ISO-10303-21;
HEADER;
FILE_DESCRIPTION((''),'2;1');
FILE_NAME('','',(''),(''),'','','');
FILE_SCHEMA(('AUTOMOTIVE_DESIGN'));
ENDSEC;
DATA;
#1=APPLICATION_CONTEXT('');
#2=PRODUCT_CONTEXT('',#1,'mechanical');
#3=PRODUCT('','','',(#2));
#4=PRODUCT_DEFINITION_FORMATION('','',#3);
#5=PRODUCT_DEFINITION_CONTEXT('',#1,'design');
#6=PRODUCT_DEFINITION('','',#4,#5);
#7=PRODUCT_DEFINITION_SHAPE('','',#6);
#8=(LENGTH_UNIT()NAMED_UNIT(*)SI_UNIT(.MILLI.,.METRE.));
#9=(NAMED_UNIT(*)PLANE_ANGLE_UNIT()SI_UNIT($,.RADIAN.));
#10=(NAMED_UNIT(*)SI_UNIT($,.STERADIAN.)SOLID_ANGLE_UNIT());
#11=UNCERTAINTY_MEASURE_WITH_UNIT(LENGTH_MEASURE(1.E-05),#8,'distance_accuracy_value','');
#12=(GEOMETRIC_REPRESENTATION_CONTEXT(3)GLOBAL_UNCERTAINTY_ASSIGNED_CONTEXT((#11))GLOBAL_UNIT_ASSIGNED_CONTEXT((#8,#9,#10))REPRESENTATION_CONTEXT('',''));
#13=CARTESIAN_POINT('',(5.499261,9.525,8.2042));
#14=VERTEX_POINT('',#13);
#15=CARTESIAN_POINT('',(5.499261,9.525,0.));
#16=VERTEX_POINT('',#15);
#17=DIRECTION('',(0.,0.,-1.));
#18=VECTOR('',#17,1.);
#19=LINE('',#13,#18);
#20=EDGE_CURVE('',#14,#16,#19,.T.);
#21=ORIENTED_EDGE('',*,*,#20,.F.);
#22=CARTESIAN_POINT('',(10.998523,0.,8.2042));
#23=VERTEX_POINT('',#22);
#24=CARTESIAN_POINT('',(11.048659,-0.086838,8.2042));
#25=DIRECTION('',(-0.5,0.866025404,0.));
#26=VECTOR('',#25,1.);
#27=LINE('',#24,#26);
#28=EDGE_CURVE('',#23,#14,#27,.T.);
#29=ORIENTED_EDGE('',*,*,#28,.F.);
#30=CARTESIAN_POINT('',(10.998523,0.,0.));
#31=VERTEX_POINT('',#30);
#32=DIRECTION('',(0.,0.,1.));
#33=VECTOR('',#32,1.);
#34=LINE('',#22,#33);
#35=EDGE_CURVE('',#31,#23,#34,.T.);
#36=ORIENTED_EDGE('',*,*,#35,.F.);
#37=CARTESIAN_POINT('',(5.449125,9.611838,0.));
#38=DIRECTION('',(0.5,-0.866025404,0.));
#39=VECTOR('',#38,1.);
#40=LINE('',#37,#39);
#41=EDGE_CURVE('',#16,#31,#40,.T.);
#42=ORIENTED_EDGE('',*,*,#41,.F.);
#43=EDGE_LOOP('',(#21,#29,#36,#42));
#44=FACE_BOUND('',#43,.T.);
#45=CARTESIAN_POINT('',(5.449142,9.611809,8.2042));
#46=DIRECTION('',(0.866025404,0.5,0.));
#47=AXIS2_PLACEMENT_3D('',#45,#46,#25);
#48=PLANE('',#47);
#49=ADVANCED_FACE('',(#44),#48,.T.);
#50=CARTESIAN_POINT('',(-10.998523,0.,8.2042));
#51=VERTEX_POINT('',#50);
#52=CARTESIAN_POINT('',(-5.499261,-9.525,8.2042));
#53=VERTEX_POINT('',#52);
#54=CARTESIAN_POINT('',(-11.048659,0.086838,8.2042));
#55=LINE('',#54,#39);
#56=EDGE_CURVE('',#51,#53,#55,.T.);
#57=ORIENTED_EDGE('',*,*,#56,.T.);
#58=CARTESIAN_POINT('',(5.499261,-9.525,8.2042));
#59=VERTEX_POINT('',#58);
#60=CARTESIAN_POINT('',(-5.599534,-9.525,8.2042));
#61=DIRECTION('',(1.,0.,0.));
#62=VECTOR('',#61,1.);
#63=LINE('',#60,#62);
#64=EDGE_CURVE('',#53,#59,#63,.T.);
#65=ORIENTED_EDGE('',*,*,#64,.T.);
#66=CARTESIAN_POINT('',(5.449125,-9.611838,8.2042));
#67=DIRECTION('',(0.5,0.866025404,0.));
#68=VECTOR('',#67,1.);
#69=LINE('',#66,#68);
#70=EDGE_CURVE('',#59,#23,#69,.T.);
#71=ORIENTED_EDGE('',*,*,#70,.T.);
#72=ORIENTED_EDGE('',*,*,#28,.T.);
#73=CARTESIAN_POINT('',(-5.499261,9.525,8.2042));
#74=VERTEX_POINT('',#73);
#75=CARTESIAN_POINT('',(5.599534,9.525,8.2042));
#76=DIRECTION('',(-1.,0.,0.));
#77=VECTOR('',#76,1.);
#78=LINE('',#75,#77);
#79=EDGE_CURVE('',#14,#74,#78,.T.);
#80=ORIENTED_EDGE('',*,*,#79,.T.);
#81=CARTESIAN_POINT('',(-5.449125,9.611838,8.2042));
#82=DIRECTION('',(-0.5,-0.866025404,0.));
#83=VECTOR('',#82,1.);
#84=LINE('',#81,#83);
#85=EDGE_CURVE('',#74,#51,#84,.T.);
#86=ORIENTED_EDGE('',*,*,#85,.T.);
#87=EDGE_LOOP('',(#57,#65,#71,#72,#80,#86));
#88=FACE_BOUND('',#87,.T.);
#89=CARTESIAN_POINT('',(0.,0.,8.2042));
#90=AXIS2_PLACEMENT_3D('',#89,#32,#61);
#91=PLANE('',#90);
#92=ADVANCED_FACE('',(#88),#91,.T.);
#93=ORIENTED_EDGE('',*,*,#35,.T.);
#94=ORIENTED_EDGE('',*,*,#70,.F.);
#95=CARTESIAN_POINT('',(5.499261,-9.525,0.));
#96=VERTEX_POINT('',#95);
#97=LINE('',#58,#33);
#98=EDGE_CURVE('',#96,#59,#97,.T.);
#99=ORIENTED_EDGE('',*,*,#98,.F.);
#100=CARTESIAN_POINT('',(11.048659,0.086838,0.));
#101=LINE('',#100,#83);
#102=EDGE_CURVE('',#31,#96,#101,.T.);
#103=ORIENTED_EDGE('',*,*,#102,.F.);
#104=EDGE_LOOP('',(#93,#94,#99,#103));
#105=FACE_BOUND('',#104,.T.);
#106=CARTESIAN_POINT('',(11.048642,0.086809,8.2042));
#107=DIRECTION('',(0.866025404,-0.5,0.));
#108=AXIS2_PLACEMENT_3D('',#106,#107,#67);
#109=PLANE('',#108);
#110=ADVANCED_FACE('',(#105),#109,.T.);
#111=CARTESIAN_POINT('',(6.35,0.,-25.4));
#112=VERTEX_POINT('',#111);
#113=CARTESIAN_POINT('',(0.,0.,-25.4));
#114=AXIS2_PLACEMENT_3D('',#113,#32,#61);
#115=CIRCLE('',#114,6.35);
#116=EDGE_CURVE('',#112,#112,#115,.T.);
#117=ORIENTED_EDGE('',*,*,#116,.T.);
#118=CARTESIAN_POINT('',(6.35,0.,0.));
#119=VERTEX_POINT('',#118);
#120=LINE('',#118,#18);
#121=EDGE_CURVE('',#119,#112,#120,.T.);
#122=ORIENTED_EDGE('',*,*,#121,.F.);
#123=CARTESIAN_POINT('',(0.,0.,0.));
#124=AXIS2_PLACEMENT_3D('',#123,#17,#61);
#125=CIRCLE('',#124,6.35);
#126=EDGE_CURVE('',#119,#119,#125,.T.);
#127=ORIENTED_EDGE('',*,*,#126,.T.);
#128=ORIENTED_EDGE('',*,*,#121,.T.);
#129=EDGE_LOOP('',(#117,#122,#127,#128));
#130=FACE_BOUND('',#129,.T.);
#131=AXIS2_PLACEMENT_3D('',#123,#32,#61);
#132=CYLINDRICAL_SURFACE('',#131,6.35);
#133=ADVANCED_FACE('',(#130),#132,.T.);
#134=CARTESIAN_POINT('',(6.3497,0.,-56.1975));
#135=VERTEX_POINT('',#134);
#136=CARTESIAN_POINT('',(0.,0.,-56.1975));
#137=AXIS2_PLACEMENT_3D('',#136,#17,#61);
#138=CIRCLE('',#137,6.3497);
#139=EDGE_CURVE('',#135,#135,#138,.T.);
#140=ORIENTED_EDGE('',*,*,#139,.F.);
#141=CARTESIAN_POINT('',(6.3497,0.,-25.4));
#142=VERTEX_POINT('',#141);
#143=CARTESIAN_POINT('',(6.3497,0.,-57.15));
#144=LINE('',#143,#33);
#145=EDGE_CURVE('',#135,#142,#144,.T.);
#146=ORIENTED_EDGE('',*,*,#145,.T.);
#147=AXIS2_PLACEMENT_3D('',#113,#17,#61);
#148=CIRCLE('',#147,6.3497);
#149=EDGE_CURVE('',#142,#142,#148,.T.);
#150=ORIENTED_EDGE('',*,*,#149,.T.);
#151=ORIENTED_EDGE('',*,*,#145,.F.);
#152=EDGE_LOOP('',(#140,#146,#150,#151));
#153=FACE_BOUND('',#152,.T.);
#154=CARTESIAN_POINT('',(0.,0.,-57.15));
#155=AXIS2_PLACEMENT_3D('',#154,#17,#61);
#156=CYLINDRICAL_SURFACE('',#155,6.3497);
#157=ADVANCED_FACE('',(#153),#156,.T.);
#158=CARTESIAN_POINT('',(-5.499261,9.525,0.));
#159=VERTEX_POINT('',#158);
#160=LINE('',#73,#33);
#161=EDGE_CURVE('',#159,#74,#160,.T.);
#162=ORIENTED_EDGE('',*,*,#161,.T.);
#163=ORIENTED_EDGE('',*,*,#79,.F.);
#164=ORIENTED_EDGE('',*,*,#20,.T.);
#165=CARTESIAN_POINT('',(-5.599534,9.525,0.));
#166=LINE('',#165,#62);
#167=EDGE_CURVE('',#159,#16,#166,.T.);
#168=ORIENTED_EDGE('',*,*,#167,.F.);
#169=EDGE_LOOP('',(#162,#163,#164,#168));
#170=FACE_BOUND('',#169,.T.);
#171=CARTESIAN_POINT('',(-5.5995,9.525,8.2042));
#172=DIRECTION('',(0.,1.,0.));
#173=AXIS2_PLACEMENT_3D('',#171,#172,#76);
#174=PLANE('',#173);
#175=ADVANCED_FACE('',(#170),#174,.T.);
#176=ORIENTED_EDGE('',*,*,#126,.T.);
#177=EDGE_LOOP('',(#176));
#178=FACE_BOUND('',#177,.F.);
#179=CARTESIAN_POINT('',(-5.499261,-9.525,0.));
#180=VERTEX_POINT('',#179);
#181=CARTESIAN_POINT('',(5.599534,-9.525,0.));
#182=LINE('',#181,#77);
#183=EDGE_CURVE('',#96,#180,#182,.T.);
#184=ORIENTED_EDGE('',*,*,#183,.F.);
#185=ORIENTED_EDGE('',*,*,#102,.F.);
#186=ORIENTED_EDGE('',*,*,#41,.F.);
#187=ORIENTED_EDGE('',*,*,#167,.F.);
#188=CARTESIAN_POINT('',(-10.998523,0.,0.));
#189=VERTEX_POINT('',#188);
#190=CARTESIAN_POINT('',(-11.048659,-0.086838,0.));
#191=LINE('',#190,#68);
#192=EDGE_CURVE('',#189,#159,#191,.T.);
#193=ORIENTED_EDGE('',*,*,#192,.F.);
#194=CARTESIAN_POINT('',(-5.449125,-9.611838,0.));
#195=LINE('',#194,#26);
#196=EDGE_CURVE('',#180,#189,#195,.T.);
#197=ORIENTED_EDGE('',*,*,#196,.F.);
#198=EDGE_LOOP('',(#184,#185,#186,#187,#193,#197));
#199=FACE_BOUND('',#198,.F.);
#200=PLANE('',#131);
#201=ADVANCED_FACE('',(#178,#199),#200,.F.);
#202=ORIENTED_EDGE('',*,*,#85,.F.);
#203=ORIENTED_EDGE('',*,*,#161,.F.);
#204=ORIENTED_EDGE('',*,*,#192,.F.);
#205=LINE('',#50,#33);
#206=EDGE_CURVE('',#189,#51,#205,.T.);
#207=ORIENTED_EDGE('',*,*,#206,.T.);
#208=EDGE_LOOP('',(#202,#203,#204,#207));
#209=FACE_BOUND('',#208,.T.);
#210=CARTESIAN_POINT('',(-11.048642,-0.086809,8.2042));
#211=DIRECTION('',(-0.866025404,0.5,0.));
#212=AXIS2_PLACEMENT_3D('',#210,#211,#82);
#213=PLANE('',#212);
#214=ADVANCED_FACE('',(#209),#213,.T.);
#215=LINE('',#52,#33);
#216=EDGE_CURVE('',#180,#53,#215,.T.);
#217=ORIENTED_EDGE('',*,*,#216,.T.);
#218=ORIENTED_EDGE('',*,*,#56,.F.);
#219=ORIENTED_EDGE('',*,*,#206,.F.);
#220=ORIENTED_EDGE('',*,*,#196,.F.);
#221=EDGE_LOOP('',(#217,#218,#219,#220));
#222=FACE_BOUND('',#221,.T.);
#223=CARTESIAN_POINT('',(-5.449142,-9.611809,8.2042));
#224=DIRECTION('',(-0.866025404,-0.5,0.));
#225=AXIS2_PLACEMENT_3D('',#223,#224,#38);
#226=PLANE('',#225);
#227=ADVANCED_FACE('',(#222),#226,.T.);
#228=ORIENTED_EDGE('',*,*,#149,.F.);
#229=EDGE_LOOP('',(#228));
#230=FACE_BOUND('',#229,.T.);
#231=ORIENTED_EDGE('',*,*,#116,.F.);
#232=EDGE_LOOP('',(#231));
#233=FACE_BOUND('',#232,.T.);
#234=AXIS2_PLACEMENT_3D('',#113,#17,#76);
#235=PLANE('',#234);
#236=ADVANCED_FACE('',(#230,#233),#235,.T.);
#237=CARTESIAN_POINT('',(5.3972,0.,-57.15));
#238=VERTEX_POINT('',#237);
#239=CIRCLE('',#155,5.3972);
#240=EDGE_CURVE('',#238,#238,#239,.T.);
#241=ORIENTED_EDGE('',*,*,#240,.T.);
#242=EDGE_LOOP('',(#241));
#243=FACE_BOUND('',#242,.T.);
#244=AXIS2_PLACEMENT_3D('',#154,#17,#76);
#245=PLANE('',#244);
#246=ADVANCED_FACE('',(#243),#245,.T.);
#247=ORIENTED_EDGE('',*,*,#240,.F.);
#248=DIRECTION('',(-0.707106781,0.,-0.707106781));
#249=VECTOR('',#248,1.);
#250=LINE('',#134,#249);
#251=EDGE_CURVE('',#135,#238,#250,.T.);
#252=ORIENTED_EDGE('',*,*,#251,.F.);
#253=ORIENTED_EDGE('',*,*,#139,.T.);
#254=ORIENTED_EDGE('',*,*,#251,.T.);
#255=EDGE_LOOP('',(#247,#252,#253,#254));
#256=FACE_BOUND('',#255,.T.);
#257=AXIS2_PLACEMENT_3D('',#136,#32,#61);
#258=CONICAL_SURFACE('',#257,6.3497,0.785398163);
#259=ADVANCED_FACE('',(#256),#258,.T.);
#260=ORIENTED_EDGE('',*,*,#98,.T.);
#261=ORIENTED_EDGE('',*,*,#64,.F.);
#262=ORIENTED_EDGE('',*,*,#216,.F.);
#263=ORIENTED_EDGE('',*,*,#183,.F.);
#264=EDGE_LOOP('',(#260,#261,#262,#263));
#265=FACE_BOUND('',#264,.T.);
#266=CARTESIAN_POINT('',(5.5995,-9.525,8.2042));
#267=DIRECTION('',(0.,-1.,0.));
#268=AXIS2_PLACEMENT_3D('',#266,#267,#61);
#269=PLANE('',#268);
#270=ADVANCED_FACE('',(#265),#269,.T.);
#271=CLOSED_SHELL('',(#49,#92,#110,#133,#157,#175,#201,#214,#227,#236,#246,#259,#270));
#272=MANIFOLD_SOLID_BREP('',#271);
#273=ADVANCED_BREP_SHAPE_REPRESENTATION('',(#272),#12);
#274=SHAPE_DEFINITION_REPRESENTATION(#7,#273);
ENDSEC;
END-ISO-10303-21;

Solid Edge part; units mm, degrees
sketch "Sketch1" plane through (0, 0, 0) normal (0, 0, 1) x (1, 0, 0)
  circle A0 centre (0, 0) radius 11.049
  dimension "D1" = 22.098
extrude "Protrusion1" add sketch "Sketch1" along normal blind 8.2042
sketch "Sketch2" plane through (0, 0, 0) normal (0, 0, -1) x (1, 0, 0)
  circle A0 centre (0, 0) radius 6.35
extrude "Protrusion2" add sketch "Sketch2" along normal blind 57.15
sketch "Sketch3" plane through (0, 0, -57.15) normal (0, 0, -1) x (1, 0, 0)
  circle A0 centre (0, 0) radius 6.3497
extrude "Cutout1" cut sketch "Sketch3" against normal blind 31.75 flip side to cut
chamfer "Chamfer_1" distance 0.9525 angle 45 1 edges at (-6.3497, 0, -57.15)
sketch "Sketch4" plane through (0, 0, 8.2042) normal (0, 0, 1) x (1, 0, 0)
  line L0 (-5.5995, 9.525) -> (5.5995, 9.525)
  dimension "D1" = 19.05
extrude "Cutout2" cut sketch "Sketch4" against normal up to next material side at (0, 9.575, 8.2042)
pattern_circular "Pattern1" count 6 over 360 about axis through (0, 0, 8.2042) along (0, 0, 1) of "Cutout2"
properties part number "117628"
